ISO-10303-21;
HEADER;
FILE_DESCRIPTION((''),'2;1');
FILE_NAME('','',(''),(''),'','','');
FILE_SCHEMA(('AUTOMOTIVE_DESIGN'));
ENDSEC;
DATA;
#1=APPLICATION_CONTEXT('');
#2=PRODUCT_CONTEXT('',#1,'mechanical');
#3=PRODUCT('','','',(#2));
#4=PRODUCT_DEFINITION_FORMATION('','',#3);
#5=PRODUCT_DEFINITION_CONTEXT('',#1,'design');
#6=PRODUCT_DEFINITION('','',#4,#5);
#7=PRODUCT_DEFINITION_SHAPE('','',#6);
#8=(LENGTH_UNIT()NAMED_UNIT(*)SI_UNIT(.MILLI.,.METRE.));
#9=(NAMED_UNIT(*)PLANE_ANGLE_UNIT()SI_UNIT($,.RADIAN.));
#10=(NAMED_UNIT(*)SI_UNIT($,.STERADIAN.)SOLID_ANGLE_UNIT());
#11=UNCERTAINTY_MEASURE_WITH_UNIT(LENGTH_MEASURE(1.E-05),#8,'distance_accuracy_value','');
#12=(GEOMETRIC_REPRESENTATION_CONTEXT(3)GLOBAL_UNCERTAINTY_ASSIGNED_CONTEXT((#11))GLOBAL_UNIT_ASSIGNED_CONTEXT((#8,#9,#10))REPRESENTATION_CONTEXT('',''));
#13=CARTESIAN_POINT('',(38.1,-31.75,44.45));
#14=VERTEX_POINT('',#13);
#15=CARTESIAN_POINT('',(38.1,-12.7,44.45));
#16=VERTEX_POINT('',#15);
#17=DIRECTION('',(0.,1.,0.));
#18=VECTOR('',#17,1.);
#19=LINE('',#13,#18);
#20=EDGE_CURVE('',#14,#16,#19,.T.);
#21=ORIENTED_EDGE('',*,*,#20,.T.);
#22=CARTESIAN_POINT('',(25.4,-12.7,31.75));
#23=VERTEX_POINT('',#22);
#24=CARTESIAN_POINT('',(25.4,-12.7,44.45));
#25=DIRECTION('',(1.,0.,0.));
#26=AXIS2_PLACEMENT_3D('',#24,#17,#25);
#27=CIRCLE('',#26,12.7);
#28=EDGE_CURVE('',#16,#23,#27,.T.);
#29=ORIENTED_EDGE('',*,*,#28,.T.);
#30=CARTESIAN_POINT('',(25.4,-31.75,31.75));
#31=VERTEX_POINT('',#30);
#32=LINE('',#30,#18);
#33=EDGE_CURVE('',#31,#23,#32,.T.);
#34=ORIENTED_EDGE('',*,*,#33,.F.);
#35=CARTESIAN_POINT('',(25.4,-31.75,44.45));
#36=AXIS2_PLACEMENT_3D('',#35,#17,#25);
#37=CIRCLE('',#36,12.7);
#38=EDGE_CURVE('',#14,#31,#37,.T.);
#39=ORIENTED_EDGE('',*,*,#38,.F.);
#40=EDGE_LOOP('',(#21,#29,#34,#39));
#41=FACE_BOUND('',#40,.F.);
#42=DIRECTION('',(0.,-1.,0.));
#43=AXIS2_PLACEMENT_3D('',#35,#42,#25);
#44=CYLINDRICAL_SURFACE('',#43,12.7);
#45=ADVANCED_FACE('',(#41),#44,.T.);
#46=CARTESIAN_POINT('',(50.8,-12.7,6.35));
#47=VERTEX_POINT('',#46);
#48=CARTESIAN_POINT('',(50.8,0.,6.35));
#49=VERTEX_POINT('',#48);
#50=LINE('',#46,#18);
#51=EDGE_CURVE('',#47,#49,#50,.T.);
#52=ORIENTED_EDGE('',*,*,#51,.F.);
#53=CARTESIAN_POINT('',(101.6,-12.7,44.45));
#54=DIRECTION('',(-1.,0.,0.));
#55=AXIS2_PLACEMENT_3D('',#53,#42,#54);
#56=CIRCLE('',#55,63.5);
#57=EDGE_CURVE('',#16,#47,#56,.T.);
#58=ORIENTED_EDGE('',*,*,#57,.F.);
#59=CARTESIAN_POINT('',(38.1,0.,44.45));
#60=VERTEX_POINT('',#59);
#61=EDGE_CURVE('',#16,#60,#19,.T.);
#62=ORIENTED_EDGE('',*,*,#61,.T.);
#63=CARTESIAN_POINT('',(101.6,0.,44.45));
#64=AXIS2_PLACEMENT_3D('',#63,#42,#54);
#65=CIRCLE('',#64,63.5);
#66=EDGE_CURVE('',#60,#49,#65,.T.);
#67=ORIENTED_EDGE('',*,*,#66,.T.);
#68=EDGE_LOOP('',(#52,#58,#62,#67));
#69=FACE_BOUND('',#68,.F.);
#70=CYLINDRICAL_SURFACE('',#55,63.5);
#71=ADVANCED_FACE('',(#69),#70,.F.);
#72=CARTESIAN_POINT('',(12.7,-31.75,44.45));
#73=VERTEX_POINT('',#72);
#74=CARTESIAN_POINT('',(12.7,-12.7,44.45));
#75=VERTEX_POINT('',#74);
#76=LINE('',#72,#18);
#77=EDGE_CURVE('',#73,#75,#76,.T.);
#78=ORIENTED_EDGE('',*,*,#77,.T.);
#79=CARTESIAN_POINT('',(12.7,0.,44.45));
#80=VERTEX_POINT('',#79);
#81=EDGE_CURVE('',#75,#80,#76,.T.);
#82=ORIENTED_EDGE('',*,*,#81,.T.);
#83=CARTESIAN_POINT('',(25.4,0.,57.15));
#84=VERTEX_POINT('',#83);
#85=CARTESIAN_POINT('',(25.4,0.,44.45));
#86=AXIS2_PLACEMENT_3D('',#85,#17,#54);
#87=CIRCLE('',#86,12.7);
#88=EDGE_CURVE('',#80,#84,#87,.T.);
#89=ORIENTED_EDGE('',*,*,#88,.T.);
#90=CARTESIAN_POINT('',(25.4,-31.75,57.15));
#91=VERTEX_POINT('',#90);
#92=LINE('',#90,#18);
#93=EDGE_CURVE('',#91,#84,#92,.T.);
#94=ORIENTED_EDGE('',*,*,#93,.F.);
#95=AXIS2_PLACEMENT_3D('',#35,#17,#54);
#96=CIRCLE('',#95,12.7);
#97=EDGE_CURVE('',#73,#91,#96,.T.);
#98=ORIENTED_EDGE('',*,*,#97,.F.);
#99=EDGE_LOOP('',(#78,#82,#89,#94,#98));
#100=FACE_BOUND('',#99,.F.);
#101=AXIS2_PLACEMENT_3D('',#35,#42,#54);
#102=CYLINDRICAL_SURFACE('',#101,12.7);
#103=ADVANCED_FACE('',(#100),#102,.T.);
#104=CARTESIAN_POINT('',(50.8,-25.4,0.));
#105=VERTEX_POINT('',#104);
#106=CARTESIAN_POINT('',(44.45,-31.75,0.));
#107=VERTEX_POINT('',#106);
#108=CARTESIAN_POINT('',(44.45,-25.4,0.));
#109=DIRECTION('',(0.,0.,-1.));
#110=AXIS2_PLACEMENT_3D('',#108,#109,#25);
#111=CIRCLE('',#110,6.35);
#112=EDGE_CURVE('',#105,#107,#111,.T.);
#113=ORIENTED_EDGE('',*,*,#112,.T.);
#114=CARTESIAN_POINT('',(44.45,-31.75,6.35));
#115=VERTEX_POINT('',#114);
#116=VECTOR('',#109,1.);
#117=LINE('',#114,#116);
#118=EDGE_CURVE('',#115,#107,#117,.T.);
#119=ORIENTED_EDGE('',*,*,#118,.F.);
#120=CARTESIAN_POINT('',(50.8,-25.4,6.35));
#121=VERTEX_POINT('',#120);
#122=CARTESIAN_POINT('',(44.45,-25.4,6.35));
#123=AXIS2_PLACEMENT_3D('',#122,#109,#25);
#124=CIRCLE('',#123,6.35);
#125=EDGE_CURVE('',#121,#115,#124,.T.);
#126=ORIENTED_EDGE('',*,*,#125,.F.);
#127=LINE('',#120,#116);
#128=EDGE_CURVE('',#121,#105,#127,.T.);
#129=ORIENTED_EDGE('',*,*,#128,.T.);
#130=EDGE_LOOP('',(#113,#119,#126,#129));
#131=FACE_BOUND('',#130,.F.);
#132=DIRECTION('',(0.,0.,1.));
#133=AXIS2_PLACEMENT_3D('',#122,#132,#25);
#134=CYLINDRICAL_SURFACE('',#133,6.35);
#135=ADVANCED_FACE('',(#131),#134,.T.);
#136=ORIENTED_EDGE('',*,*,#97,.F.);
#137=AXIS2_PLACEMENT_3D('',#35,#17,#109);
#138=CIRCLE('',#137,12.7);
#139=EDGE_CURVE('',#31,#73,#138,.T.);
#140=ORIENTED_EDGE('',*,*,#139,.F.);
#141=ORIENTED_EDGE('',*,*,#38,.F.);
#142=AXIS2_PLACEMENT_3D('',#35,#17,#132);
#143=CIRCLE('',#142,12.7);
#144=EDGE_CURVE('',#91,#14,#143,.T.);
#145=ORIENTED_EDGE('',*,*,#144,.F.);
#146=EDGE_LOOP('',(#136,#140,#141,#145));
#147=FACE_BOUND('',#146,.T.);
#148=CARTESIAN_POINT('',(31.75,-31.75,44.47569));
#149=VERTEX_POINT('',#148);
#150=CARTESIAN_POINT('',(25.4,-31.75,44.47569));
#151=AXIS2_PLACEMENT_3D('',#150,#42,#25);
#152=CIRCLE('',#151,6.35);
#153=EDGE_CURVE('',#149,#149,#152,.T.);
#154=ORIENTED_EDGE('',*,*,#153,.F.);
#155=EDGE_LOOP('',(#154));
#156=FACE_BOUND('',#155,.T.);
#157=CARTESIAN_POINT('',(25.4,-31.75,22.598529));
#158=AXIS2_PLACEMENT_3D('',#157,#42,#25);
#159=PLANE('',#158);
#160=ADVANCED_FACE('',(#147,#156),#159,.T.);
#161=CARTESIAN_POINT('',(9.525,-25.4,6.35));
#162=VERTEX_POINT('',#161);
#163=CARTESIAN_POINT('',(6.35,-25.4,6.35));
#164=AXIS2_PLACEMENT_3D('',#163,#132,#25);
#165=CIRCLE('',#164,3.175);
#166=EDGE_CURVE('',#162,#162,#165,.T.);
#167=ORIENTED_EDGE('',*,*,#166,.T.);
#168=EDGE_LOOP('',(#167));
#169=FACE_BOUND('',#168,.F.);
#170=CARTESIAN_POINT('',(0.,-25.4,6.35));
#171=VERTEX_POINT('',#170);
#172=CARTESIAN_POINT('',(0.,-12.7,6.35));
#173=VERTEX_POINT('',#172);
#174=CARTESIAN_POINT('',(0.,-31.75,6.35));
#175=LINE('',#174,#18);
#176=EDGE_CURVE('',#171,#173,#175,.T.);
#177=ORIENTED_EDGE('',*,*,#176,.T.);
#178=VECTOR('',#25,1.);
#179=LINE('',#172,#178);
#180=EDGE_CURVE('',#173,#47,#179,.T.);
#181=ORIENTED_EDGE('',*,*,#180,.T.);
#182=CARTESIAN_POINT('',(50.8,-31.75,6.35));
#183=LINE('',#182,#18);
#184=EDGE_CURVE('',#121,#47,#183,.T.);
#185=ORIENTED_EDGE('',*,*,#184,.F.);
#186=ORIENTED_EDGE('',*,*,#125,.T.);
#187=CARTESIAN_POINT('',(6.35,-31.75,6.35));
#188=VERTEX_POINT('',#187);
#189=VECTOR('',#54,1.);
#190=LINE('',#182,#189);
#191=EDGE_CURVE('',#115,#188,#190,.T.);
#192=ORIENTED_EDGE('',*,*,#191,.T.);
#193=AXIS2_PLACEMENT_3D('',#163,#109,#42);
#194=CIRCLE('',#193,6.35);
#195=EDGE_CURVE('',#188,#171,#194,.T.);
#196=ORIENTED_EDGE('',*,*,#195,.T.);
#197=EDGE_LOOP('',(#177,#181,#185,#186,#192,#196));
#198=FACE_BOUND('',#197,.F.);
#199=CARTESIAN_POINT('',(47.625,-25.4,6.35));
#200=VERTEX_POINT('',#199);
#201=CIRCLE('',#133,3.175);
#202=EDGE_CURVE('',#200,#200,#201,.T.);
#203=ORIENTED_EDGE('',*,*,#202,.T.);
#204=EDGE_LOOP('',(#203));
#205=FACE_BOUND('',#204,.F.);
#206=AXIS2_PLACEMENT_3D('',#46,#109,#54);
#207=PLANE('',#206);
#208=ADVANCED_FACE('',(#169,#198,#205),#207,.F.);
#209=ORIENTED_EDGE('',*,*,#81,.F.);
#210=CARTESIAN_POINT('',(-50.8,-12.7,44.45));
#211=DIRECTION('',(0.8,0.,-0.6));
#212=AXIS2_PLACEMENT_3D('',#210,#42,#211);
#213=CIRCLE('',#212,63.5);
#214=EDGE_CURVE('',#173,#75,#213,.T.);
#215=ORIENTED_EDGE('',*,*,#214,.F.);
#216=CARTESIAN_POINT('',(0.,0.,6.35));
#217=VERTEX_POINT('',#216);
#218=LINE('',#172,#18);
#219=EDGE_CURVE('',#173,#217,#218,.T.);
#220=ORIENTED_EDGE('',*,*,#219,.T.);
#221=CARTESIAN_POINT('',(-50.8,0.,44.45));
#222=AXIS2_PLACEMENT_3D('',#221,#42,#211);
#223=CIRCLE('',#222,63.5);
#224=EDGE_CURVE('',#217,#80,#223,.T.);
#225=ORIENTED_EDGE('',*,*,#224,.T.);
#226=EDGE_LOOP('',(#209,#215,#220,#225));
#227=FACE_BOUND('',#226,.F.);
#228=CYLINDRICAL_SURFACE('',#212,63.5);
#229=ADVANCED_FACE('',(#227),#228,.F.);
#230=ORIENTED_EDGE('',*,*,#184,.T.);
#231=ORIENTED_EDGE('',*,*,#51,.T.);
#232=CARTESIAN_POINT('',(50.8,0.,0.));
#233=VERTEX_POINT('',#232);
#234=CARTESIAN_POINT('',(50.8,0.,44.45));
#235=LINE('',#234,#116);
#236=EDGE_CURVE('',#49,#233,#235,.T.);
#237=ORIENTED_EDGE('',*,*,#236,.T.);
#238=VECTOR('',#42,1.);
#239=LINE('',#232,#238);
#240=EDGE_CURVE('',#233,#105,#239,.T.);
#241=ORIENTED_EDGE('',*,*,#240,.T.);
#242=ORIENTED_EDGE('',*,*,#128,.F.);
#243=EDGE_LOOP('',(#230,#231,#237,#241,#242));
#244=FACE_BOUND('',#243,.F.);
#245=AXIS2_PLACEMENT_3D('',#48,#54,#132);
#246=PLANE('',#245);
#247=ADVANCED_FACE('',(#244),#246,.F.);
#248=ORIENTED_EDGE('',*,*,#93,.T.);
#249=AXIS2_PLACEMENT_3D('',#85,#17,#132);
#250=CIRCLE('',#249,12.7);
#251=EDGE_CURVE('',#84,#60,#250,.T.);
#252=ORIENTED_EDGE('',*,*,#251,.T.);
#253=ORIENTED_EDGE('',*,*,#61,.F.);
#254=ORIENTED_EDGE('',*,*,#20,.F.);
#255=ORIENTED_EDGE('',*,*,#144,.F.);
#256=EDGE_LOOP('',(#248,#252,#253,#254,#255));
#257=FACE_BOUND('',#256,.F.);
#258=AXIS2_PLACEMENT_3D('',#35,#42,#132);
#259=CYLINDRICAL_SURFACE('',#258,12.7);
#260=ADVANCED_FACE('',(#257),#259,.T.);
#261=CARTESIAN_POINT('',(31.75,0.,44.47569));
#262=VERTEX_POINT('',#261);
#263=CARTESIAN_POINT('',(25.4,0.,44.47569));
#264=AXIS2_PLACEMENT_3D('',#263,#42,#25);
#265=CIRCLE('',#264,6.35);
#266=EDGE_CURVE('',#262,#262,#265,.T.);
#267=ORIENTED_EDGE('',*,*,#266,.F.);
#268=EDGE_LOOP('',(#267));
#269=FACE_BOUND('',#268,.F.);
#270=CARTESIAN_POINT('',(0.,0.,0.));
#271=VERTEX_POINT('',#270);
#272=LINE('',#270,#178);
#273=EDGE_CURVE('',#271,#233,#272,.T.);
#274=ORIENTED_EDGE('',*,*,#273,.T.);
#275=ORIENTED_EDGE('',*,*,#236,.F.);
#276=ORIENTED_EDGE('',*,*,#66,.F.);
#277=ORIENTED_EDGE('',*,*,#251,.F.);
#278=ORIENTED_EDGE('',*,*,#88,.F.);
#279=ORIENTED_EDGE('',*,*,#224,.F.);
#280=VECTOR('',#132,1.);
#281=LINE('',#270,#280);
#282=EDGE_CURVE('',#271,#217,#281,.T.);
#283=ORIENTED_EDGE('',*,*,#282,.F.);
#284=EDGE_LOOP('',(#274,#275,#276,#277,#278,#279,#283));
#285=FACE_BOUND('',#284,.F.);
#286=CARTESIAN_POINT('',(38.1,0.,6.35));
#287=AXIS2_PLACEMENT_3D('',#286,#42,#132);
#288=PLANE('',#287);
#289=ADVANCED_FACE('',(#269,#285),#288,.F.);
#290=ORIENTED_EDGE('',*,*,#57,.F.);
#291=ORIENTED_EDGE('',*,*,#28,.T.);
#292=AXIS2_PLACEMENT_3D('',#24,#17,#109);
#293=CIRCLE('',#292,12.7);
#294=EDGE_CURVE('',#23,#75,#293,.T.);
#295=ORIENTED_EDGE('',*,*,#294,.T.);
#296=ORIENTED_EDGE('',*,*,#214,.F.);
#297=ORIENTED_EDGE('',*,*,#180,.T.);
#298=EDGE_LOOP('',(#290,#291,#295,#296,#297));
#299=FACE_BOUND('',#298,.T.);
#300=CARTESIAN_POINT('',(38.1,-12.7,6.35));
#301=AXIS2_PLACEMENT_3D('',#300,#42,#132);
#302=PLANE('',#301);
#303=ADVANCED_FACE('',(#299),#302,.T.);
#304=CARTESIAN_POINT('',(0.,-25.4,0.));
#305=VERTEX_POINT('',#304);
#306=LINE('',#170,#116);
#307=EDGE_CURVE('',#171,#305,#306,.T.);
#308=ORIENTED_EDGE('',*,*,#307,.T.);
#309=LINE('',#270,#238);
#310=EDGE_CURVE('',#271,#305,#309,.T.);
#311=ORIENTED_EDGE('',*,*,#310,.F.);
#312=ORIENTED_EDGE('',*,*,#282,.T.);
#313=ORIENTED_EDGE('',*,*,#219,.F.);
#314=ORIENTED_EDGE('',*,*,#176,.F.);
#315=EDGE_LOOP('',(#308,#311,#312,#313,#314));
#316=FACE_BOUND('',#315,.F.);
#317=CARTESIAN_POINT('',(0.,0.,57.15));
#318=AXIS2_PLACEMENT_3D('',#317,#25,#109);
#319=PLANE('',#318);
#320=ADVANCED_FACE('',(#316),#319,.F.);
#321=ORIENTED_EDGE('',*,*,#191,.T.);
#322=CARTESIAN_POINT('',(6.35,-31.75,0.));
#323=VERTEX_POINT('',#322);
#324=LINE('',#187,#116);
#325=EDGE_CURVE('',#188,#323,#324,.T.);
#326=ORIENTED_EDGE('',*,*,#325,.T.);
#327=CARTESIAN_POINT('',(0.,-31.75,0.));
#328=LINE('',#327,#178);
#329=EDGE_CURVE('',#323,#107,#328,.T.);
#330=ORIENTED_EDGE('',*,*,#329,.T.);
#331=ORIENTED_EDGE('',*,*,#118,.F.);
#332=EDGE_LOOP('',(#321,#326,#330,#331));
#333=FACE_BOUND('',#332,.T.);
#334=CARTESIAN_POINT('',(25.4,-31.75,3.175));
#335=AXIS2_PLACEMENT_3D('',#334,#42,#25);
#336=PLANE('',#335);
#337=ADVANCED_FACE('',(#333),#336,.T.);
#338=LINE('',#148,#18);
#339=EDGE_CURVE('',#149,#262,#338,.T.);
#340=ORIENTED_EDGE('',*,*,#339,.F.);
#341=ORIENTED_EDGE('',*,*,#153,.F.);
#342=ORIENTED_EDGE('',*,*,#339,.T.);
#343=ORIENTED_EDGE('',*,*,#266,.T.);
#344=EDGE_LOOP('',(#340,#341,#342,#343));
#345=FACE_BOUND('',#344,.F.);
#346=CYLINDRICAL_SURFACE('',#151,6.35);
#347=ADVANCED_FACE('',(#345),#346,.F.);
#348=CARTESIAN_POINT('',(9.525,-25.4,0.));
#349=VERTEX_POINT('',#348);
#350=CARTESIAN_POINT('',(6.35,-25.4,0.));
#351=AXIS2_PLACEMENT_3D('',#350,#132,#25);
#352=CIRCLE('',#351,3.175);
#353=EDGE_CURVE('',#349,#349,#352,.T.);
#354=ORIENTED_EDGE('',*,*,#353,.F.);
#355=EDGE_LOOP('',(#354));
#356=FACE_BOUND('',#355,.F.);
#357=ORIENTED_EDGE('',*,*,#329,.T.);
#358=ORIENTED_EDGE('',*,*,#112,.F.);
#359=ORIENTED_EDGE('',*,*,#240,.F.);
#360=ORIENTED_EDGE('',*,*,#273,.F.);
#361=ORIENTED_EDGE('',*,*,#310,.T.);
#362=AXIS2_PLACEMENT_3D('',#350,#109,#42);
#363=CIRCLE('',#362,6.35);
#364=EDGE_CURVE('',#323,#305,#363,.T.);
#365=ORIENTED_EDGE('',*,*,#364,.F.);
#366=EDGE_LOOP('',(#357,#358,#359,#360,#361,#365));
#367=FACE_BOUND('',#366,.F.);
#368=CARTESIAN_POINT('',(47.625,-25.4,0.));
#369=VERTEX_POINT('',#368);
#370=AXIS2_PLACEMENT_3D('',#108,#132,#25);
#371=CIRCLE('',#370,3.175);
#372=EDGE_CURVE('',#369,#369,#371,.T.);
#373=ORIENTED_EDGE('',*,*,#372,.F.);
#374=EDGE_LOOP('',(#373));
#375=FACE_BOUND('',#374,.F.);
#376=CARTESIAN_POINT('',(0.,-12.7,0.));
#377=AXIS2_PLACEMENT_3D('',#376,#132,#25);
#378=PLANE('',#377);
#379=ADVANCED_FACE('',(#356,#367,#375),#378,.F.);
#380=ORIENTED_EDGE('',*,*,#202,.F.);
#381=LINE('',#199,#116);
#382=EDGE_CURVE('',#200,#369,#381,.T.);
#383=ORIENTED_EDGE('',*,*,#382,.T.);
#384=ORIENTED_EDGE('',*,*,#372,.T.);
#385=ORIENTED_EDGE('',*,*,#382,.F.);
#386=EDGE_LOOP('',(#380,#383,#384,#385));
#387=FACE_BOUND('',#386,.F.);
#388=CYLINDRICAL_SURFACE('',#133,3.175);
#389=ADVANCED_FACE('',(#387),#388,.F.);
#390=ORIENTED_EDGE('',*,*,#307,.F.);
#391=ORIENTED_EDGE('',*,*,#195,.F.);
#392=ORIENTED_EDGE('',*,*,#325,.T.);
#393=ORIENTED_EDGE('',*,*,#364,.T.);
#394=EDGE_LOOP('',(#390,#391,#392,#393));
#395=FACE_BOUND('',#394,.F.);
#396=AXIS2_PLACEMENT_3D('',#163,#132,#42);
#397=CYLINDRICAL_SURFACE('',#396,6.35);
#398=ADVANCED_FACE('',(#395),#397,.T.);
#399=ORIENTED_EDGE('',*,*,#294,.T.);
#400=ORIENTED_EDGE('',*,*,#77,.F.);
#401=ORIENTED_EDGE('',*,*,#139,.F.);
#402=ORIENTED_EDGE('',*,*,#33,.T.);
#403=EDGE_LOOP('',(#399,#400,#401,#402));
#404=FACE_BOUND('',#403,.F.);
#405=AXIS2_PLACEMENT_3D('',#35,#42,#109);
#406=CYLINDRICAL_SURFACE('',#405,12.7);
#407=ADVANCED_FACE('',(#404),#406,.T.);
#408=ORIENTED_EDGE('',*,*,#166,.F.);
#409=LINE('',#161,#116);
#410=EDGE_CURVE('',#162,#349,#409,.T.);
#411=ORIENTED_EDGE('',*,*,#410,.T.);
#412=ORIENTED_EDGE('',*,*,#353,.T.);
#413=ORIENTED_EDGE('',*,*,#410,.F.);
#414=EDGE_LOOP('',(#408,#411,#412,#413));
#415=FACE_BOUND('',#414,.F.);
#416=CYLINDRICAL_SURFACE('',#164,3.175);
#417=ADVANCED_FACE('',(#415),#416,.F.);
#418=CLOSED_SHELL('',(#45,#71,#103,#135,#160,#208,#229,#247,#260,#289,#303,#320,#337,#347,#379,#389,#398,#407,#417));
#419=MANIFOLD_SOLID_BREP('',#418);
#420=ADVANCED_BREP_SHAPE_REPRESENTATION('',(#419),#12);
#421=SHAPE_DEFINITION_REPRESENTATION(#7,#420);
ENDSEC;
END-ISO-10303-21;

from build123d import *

# Parameters (mm, degrees)
F1_DEPTH  = 31.75
F3_DEPTH  = 31.75
F7_DEPTH  = 19.05
F9_W      = 50.8
F9_H      = 19.05
F10_DEPTH = 31.75
F11_DEPTH = 19.05
F13_DEPTH = 19.05
F14_DEPTH = 12.7
F15_DEPTH = 12.7
F17_DEPTH = 12.7
F18_R     = 6.35
F19_DEPTH = 31.75
F20_R     = 3.175
F21_DEPTH = 6.35
F23_DEPTH = 6.35
F25_DEPTH = 6.35


with BuildPart() as f1:
    # F0 (on Front) → F1 (new body)
    with BuildSketch(Plane.XZ):
        Polygon((0, 6.35), (0, 0), (50.8, 0), (50.8, 6.35), (38.1, 6.35), (38.1, 57.15), (12.7, 57.15), (12.7, 6.35), align=None)
    extrude(amount=F1_DEPTH)

    # F2 (on face) → F3 (cut)
    with BuildSketch(Plane.XZ.offset(31.75)):
        with BuildLine():
            ThreePointArc((12.7, 44.45), (16.4197438789, 53.4302561211), (25.4, 57.15))
            Line((25.4, 57.15), (12.7, 57.15))
            Line((12.7, 57.15), (12.7, 44.45))
        make_face()
        with BuildLine():
            ThreePointArc((25.4, 57.15), (34.3802561211, 53.4302561211), (38.1, 44.45))
            Line((38.1, 44.45), (38.1, 57.15))
            Line((38.1, 57.15), (25.4, 57.15))
        make_face()
    extrude(amount=-F3_DEPTH, mode=Mode.SUBTRACT)

    # F5 (on face) → F7 (cut)
    with BuildSketch(Plane.XZ.offset(31.75)):
        with BuildLine():
            ThreePointArc((38.1, 44.45), (34.3802561211, 35.4697438789), (25.4, 31.75))
            Line((25.4, 31.75), (38.1, 31.75))
            Line((38.1, 31.75), (38.1, 44.45))
        make_face()
    extrude(amount=-F7_DEPTH, mode=Mode.SUBTRACT)

    # F9 (on face) → F10 (cut)
    with BuildSketch(Plane(origin=(0, 0, 0), x_dir=(1, 0, 0), z_dir=(0, 0, -1))):
        with Locations((25.4, 22.225)):
            Rectangle(F9_W, F9_H)
    extrude(amount=-F10_DEPTH, mode=Mode.SUBTRACT)

    # F8 (on face) → F11 (cut)
    with BuildSketch(Plane.XZ.offset(31.75)):
        with BuildLine():
            Line((12.7, 31.75), (25.4, 31.75))
            ThreePointArc((25.4, 31.75), (16.4197438789, 35.4697438789), (12.7, 44.45))
            Line((12.7, 44.45), (12.7, 31.75))
        make_face()
    extrude(amount=-F11_DEPTH, mode=Mode.SUBTRACT)

    # F12 (on face) → F13 (join)
    with BuildSketch(Plane.XZ.offset(12.7)):
        Polygon((38.1, 6.35), (12.7, 6.35), (0, 6.35), (0, 0), (50.8, 0), (50.8, 6.35), align=None)
    extrude(amount=F13_DEPTH)

    # F14 (add): a face of the model
    f14_faces = [f1.faces().sort_by_distance(p)[0] for p in [
        (12.7, -6.35, 25.4),
    ]]
    extrude(f14_faces, amount=F14_DEPTH)

    # F15 (add): a face of the model
    f15_faces = [f1.faces().sort_by_distance(p)[0] for p in [
        (38.1, -6.35, 25.4),
    ]]
    extrude(f15_faces, amount=F15_DEPTH)

    # F16 (on face) → F17 (cut)
    with BuildSketch(Plane.XZ.offset(12.7)):
        with BuildLine():
            Line((0, 44.45), (0, 6.35))
            ThreePointArc((0, 6.35), (9.4413894262, 24.3695368579), (12.7, 44.45))
            Line((12.7, 44.45), (0, 44.45))
        make_face()
        with BuildLine():
            ThreePointArc((38.1, 44.45), (41.3586105738, 24.3695368579), (50.8, 6.35))
            Line((50.8, 6.35), (50.8, 44.45))
            Line((50.8, 44.45), (38.1, 44.45))
        make_face()
    extrude(amount=-F17_DEPTH, mode=Mode.SUBTRACT)

    # F18 (on face) → F19 (cut)
    with BuildSketch(Plane.XZ.offset(31.75)):
        with Locations((25.4, 44.4756895304)):
            Circle(F18_R)
    extrude(amount=-F19_DEPTH, mode=Mode.SUBTRACT)

    # F20 (on face) → F21 (cut)
    with BuildSketch(Plane.XY.offset(6.35)):
        with Locations((44.45, -25.4)):
            Circle(F20_R)
        with Locations((6.35, -25.4)):
            Circle(F20_R)
    extrude(amount=-F21_DEPTH, mode=Mode.SUBTRACT)

    # F22 (on face) → F23 (cut)
    with BuildSketch(Plane.XY.offset(6.35)):
        with BuildLine():
            ThreePointArc((6.35, -31.75), (1.8598719395, -29.8901280605), (0, -25.4))
            Line((0, -25.4), (0, -31.75))
            Line((0, -31.75), (6.35, -31.75))
        make_face()
    extrude(amount=-F23_DEPTH, mode=Mode.SUBTRACT)

    # F24 (on face) → F25 (cut)
    with BuildSketch(Plane.XY.offset(6.35)):
        with BuildLine():
            ThreePointArc((50.8, -25.4), (48.9401280605, -29.8901280605), (44.45, -31.75))
            Line((44.45, -31.75), (50.8, -31.75))
            Line((50.8, -31.75), (50.8, -25.4))
        make_face()
    extrude(amount=-F25_DEPTH, mode=Mode.SUBTRACT)


solid = f1.part
